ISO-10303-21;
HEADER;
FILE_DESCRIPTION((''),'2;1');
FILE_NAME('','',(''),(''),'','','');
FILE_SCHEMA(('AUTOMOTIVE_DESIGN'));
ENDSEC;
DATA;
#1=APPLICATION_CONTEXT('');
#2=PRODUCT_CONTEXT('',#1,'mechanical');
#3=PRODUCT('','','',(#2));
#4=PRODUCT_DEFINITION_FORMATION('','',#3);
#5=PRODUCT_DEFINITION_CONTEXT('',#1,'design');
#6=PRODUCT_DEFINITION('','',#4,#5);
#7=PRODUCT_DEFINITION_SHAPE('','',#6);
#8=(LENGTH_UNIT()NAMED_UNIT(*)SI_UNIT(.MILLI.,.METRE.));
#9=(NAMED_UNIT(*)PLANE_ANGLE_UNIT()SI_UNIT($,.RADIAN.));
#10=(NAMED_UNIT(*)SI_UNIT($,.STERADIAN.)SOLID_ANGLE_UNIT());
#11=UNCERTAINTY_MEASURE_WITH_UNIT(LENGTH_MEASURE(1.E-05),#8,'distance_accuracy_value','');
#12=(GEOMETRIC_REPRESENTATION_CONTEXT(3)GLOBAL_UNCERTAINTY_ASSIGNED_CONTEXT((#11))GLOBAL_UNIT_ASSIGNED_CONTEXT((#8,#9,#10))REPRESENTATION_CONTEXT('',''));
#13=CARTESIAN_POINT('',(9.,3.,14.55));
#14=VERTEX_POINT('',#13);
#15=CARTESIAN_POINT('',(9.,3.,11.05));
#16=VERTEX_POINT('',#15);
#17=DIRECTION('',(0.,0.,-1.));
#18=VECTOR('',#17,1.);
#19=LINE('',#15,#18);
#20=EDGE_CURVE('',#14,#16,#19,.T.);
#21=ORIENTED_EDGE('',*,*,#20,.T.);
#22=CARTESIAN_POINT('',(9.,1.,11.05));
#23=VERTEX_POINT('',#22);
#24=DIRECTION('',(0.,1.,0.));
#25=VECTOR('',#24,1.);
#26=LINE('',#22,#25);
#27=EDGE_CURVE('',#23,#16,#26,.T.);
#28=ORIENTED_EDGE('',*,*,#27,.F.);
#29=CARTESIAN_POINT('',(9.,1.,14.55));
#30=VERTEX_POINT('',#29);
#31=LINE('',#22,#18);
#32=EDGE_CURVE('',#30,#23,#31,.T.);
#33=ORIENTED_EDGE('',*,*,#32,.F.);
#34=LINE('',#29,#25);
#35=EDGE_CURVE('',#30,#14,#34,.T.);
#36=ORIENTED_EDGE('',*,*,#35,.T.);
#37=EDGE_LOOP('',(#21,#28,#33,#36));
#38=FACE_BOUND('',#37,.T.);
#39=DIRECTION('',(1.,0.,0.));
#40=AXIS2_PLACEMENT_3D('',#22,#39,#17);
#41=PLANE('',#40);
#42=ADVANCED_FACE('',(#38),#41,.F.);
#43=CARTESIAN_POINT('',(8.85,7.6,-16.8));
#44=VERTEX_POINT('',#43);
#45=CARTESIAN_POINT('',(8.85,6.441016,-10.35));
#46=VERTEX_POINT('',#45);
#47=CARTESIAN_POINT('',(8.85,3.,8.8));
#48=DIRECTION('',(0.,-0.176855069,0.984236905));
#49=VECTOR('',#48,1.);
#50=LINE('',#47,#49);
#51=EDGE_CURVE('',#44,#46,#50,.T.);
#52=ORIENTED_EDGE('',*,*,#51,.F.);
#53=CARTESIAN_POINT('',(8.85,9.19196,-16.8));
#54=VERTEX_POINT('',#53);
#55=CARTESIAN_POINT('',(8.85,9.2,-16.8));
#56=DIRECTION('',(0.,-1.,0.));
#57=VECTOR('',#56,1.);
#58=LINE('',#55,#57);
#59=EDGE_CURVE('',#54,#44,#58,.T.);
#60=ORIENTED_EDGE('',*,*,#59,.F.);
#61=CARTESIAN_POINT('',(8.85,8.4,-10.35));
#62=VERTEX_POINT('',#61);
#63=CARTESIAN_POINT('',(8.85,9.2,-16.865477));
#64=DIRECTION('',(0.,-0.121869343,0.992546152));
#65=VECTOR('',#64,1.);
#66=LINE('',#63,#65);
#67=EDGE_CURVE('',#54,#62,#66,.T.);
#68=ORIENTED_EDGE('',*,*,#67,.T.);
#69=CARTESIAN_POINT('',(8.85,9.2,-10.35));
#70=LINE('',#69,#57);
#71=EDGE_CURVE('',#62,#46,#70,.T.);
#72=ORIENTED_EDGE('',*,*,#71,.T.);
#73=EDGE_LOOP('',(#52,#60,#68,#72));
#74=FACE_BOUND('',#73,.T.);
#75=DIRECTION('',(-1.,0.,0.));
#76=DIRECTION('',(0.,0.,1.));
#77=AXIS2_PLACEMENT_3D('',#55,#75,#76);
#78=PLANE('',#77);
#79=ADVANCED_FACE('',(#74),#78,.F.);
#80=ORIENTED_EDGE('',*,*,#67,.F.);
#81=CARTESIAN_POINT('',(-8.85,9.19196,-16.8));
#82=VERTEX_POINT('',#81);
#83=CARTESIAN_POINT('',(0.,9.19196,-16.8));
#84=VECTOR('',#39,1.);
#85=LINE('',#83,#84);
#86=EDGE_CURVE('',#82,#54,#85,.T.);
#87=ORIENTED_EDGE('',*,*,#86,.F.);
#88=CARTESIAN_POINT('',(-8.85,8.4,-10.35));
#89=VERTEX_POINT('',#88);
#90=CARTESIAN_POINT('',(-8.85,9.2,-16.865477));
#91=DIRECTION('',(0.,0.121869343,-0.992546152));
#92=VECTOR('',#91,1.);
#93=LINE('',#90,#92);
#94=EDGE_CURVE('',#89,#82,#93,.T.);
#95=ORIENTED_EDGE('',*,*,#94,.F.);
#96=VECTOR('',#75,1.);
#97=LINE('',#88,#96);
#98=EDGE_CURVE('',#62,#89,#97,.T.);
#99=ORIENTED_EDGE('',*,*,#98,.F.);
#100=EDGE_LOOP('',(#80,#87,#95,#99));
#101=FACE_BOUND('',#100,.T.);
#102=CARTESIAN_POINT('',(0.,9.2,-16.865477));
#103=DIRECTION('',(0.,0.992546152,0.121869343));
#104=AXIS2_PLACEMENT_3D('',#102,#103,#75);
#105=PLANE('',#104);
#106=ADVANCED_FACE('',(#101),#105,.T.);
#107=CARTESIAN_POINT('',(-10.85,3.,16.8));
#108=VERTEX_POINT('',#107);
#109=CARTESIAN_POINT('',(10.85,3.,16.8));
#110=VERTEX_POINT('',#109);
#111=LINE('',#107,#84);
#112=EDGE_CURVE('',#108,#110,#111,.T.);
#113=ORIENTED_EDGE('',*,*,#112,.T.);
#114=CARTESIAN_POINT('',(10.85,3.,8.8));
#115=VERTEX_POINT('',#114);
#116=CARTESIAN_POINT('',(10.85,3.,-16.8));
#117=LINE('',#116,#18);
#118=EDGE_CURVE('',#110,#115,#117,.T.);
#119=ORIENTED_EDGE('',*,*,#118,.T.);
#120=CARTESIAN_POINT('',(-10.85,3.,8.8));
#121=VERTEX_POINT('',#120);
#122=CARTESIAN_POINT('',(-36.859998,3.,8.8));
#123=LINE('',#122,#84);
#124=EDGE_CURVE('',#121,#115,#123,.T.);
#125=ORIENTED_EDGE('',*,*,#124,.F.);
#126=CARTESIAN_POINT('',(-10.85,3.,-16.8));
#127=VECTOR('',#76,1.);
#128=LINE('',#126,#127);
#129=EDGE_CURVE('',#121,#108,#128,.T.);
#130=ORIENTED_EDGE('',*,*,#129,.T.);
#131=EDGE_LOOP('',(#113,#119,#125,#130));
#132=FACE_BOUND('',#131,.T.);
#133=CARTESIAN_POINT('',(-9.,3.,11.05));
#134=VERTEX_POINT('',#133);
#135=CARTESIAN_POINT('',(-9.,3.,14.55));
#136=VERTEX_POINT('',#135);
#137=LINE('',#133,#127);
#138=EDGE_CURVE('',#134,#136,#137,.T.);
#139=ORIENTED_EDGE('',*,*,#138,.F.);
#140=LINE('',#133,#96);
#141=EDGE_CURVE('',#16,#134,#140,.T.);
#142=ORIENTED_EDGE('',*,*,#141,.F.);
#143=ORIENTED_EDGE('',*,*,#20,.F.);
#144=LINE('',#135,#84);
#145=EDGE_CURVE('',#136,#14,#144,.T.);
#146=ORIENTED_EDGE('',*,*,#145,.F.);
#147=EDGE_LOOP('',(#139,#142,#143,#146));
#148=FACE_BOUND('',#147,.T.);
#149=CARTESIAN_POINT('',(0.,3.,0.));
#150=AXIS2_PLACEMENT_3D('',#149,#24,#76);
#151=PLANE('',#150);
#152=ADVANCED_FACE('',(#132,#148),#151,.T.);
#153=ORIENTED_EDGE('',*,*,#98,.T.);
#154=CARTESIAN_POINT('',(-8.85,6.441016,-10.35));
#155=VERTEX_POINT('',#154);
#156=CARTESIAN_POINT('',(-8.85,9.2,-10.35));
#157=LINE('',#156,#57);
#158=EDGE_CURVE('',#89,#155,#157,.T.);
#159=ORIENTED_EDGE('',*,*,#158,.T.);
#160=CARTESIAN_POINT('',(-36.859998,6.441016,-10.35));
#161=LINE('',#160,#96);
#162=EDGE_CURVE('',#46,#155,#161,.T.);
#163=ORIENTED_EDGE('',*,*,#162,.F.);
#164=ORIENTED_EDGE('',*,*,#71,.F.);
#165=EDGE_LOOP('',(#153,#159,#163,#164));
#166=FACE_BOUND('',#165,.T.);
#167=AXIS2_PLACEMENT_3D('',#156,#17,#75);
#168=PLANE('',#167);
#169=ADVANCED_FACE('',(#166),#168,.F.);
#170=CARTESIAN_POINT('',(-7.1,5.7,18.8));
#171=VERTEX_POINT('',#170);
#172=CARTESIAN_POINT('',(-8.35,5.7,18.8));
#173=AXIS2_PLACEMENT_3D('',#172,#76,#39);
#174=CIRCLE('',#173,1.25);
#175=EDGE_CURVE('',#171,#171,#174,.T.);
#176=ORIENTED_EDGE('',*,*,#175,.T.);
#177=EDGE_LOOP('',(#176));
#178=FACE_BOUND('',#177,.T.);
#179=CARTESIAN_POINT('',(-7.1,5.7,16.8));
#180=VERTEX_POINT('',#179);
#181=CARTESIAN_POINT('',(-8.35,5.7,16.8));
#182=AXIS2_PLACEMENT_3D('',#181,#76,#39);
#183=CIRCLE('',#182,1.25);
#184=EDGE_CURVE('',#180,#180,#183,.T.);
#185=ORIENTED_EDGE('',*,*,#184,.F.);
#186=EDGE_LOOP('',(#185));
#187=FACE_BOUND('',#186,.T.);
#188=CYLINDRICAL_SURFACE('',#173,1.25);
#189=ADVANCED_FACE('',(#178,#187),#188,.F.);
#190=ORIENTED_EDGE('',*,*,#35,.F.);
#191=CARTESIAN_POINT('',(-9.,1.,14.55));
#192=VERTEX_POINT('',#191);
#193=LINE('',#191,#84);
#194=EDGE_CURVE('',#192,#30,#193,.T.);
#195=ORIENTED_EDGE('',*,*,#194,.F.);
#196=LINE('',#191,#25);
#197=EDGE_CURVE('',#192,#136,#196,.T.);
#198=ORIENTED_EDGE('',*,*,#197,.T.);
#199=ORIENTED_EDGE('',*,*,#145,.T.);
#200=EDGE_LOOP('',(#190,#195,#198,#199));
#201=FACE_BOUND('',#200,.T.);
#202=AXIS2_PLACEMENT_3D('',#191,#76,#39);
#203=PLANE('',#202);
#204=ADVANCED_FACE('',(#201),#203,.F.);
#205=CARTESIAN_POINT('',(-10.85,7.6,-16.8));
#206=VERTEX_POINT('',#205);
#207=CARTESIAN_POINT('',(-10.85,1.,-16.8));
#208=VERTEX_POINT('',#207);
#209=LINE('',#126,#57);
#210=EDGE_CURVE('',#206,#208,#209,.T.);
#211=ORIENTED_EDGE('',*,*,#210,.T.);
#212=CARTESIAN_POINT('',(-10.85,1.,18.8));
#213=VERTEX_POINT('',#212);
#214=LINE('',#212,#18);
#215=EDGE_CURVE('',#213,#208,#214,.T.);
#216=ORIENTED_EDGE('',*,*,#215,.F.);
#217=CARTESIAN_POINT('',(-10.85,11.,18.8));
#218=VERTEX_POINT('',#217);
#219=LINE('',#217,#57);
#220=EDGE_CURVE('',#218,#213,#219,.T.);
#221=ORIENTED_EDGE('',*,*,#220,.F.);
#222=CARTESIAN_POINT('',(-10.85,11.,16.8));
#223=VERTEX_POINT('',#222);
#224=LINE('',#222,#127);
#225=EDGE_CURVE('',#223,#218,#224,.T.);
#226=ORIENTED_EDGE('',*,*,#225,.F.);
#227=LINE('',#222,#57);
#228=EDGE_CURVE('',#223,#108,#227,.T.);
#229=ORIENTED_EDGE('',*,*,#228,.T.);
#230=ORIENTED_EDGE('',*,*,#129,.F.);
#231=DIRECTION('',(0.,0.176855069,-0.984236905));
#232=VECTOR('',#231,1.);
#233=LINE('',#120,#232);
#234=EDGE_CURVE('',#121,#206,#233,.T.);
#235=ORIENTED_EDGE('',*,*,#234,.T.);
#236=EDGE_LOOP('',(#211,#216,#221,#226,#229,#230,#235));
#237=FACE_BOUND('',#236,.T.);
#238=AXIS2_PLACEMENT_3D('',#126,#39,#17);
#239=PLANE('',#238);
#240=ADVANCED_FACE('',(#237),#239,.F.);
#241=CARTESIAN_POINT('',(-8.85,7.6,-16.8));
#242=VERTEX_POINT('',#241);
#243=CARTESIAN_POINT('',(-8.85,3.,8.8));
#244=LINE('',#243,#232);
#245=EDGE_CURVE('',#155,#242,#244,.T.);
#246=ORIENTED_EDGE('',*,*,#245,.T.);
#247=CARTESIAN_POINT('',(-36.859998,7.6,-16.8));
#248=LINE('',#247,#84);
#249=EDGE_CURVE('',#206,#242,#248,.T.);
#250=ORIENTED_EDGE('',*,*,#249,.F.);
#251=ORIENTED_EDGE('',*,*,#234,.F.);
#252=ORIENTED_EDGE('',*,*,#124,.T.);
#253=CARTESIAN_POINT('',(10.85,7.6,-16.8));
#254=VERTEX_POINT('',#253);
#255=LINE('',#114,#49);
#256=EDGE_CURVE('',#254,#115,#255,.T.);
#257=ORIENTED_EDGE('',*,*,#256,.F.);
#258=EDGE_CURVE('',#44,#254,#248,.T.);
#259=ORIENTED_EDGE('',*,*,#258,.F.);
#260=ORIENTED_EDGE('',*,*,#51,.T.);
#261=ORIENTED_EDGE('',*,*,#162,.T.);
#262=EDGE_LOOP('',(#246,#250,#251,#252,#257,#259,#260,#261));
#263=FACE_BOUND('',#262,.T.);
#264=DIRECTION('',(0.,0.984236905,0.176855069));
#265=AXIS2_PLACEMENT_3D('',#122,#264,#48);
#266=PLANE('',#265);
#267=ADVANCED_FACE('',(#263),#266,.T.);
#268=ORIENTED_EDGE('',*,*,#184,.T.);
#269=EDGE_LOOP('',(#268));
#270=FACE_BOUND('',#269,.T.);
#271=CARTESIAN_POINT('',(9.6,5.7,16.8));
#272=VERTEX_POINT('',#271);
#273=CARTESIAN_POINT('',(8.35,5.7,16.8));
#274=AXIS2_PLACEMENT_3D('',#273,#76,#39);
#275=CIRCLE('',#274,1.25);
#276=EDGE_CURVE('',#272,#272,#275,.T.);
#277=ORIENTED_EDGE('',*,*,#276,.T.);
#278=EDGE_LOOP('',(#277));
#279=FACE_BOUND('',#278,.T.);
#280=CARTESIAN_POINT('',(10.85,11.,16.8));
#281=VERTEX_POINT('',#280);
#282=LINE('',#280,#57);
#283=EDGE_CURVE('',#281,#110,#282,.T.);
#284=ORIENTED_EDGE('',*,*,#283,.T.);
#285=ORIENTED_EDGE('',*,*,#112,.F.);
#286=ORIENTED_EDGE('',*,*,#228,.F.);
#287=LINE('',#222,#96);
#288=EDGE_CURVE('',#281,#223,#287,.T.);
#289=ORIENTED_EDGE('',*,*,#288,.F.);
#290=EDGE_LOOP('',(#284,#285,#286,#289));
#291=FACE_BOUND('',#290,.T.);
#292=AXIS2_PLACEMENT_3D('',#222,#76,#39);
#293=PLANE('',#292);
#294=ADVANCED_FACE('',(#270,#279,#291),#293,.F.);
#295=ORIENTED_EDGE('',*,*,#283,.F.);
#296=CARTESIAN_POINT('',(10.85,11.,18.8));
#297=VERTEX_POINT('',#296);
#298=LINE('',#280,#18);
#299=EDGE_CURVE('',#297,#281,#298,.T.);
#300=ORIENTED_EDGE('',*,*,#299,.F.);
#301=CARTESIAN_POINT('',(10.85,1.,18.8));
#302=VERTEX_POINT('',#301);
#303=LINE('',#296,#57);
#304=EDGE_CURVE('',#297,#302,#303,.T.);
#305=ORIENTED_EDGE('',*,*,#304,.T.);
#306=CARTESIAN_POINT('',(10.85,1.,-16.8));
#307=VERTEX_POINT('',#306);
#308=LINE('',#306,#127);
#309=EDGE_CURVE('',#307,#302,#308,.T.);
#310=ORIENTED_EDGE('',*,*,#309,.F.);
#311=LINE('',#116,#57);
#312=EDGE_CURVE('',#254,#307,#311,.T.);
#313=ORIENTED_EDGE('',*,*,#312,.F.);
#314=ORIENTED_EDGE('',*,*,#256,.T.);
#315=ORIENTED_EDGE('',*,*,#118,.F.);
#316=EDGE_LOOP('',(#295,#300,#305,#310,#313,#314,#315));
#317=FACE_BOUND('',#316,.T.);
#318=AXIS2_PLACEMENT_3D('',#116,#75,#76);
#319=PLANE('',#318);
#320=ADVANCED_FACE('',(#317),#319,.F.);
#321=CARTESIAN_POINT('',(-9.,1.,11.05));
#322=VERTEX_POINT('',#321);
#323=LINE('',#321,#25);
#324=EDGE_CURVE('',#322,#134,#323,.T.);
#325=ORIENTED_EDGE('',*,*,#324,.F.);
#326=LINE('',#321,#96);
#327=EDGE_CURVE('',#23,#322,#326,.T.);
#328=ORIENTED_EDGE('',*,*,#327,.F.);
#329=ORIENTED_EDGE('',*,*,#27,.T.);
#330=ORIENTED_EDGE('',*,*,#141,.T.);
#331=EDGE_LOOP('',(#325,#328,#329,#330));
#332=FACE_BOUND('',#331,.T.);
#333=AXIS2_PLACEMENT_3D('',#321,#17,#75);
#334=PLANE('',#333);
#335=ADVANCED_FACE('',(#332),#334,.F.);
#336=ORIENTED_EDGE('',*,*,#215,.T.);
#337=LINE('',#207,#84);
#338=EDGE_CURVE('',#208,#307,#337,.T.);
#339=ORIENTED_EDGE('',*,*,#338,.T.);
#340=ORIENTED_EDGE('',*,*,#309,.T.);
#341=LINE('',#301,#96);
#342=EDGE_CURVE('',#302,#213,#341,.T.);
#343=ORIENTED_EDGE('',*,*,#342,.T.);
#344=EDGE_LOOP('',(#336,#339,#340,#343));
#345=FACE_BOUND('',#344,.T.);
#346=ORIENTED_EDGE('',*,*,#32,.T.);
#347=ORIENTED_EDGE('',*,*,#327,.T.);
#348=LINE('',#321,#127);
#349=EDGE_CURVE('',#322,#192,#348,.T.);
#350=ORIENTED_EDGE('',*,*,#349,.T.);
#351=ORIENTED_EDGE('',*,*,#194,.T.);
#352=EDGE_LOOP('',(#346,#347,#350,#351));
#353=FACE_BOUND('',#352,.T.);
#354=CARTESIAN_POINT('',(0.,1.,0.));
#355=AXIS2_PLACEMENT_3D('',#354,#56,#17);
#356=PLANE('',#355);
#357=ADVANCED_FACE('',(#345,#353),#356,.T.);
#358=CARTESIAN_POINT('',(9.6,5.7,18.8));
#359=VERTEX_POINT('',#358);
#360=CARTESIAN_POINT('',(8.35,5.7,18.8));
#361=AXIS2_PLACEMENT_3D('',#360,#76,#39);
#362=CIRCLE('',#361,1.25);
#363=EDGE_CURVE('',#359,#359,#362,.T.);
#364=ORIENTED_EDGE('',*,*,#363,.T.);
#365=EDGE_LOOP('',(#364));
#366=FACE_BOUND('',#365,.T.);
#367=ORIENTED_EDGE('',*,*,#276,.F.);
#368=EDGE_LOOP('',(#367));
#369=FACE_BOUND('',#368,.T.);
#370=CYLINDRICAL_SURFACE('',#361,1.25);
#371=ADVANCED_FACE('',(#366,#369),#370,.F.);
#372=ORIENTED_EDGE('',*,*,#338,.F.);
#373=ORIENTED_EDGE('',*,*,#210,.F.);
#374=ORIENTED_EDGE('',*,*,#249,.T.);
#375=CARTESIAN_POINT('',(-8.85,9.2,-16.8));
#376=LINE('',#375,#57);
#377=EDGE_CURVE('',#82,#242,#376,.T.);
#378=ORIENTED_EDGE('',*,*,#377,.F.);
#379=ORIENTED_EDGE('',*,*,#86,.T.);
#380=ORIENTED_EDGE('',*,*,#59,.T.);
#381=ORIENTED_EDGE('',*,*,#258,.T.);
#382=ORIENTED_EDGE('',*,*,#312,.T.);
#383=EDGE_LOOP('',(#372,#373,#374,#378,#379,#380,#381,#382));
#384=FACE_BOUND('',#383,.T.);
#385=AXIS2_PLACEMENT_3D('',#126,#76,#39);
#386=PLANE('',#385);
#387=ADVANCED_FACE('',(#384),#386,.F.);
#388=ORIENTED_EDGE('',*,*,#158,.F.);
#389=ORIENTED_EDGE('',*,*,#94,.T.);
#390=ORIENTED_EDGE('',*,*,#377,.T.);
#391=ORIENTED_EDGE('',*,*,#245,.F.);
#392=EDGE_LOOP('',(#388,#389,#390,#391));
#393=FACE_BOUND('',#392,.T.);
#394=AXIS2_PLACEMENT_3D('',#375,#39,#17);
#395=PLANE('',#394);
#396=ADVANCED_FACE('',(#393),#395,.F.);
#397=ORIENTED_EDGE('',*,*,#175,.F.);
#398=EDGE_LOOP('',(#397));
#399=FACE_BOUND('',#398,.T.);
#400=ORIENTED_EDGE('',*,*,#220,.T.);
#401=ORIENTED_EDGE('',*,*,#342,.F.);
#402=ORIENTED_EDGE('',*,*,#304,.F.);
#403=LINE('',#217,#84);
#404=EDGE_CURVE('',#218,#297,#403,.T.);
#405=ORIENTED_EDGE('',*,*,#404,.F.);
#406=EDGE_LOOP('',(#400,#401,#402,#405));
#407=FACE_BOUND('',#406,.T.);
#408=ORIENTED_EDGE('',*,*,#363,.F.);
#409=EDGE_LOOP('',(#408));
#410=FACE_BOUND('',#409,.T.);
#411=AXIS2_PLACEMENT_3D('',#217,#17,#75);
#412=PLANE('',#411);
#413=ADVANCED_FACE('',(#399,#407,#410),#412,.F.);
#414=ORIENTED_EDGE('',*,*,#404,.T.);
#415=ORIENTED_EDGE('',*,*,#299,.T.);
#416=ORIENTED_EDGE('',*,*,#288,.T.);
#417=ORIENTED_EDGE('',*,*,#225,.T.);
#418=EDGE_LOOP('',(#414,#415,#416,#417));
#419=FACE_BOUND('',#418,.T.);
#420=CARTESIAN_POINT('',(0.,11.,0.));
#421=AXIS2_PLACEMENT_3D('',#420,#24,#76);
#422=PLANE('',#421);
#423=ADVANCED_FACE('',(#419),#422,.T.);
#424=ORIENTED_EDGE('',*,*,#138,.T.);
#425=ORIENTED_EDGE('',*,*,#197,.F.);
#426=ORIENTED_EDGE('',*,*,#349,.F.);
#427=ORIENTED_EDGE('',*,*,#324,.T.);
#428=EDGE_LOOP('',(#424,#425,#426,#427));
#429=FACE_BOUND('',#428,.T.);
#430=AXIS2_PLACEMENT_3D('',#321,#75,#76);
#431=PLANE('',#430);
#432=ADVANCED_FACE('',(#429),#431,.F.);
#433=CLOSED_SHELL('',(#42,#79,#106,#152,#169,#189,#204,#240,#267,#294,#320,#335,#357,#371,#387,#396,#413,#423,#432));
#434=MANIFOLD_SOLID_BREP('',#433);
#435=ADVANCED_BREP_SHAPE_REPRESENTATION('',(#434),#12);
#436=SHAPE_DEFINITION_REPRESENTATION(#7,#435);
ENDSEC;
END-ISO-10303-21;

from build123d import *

# Parameters (mm, degrees)
SKETCH1_W                 = 21.7
SKETCH1_H                 = 33.6
BOSS_EXTRUDE1_DEPTH       = 3
SKETCH2_W                 = 18
SKETCH2_H                 = 3.5
CUT_EXTRUDE1_DEPTH        = 2
BOSS_EXTRUDE2_DEPTH       = 21.7
SKETCH4_W                 = 17.7
SKETCH4_H                 = 6.45
BOSS_EXTRUDE3_DEPTH       = 9.2
SKETCH5_W                 = 21.7
SKETCH5_H                 = 2
BOSS_EXTRUDE4_DEPTH       = 11
F_1_0MM_DOWEL_HOLE1_D     = 2.5
F_1_0MM_DOWEL_HOLE1_DEPTH = 9.248924226
F_1_0MM_DOWEL_HOLE1_TIP   = 0.751075774
CHAMFER1_SIZE             = 6.515477142
CHAMFER1_SIZE_2           = 0.8
CUT_EXTRUDE2_DEPTH        = 25.334389246
CUT_EXTRUDE2_DEPTH_BACK   = 1
SKETCH8_W                 = 21.7
SKETCH8_H                 = 35.6


with BuildPart() as part:
    # Sketch1 → Boss-Extrude1 (new body)
    with BuildSketch(Plane(origin=(0, 0, 0), x_dir=(1, 0, 0), z_dir=(0, 1, 0))):
        Rectangle(SKETCH1_W, SKETCH1_H)
    extrude(amount=BOSS_EXTRUDE1_DEPTH)

    # Sketch2 → Cut-Extrude1 (cut)
    with BuildSketch(Plane(origin=(0, 3, 0), x_dir=(1, 0, 0), z_dir=(0, 1, 0))):
        with Locations((0, -12.8)):
            Rectangle(SKETCH2_W, SKETCH2_H)
    extrude(amount=-CUT_EXTRUDE1_DEPTH, mode=Mode.SUBTRACT)

    # Sketch3 → Boss-Extrude2 (add)
    with BuildSketch(Plane(origin=(10.85, 0, 0), x_dir=(0, 0, -1), z_dir=(1, 0, 0))):
        Polygon((-8.8, 3), (16.8, 7.6), (16.8, 3), align=None)
    extrude(amount=-BOSS_EXTRUDE2_DEPTH)

    # Sketch4 → Boss-Extrude3 (add)
    with BuildSketch(Plane(origin=(0, 0, 0.27322177), x_dir=(1, 0, 0), z_dir=(0, 1, 0))):
        with Locations((0, 13.84822177)):
            Rectangle(SKETCH4_W, SKETCH4_H)
    extrude(amount=BOSS_EXTRUDE3_DEPTH)

    # Sketch5 → Boss-Extrude4 (add)
    with BuildSketch(Plane(origin=(0, 0, 0), x_dir=(1, 0, 0), z_dir=(0, 1, 0))):
        with Locations((0, -17.8)):
            Rectangle(SKETCH5_W, SKETCH5_H)
    extrude(amount=BOSS_EXTRUDE4_DEPTH)

    # Ø1.0mm Dowel Hole1
    with Locations(Plane.XY.offset(18.8)):
        with Locations((-8.35, 5.7), (8.35, 5.7)):
            Hole(F_1_0MM_DOWEL_HOLE1_D / 2, depth=F_1_0MM_DOWEL_HOLE1_DEPTH)
            with Locations((0, 0, -(F_1_0MM_DOWEL_HOLE1_DEPTH + F_1_0MM_DOWEL_HOLE1_TIP / 2))):  # 118° drill point
                Cone(0, F_1_0MM_DOWEL_HOLE1_D / 2, F_1_0MM_DOWEL_HOLE1_TIP, mode=Mode.SUBTRACT)

    # Chamfer1
    # the kernel refuses this chamfer: 6.515477142, 0.8 mm, written as the material it takes off along each edge
    with BuildSketch(Plane(origin=(25.785570178, 9.2, -10.35), x_dir=(0, 0.00468857506979086, -0.9999890085715017), z_dir=(-1, 0, 0))) as chamfer1_piece_1:
        Polygon((CHAMFER1_SIZE * 0.99998900863, CHAMFER1_SIZE * 0.00468857507006), (-CHAMFER1_SIZE_2 * 0.00468857506979, CHAMFER1_SIZE_2 * 0.999989008572), (0, 0), align=None)
    extrude(amount=51.571140357, mode=Mode.SUBTRACT)

    # Sketch8 → Cut-Extrude2 (cut, two sides: drawn at the far end of the back side and taken through both)
    with BuildSketch(Plane.XZ.offset(-CUT_EXTRUDE2_DEPTH_BACK)):
        with Locations((0, 1)):
            Rectangle(SKETCH8_W, SKETCH8_H)
    extrude(amount=CUT_EXTRUDE2_DEPTH + CUT_EXTRUDE2_DEPTH_BACK, mode=Mode.SUBTRACT)


solid = part.part
